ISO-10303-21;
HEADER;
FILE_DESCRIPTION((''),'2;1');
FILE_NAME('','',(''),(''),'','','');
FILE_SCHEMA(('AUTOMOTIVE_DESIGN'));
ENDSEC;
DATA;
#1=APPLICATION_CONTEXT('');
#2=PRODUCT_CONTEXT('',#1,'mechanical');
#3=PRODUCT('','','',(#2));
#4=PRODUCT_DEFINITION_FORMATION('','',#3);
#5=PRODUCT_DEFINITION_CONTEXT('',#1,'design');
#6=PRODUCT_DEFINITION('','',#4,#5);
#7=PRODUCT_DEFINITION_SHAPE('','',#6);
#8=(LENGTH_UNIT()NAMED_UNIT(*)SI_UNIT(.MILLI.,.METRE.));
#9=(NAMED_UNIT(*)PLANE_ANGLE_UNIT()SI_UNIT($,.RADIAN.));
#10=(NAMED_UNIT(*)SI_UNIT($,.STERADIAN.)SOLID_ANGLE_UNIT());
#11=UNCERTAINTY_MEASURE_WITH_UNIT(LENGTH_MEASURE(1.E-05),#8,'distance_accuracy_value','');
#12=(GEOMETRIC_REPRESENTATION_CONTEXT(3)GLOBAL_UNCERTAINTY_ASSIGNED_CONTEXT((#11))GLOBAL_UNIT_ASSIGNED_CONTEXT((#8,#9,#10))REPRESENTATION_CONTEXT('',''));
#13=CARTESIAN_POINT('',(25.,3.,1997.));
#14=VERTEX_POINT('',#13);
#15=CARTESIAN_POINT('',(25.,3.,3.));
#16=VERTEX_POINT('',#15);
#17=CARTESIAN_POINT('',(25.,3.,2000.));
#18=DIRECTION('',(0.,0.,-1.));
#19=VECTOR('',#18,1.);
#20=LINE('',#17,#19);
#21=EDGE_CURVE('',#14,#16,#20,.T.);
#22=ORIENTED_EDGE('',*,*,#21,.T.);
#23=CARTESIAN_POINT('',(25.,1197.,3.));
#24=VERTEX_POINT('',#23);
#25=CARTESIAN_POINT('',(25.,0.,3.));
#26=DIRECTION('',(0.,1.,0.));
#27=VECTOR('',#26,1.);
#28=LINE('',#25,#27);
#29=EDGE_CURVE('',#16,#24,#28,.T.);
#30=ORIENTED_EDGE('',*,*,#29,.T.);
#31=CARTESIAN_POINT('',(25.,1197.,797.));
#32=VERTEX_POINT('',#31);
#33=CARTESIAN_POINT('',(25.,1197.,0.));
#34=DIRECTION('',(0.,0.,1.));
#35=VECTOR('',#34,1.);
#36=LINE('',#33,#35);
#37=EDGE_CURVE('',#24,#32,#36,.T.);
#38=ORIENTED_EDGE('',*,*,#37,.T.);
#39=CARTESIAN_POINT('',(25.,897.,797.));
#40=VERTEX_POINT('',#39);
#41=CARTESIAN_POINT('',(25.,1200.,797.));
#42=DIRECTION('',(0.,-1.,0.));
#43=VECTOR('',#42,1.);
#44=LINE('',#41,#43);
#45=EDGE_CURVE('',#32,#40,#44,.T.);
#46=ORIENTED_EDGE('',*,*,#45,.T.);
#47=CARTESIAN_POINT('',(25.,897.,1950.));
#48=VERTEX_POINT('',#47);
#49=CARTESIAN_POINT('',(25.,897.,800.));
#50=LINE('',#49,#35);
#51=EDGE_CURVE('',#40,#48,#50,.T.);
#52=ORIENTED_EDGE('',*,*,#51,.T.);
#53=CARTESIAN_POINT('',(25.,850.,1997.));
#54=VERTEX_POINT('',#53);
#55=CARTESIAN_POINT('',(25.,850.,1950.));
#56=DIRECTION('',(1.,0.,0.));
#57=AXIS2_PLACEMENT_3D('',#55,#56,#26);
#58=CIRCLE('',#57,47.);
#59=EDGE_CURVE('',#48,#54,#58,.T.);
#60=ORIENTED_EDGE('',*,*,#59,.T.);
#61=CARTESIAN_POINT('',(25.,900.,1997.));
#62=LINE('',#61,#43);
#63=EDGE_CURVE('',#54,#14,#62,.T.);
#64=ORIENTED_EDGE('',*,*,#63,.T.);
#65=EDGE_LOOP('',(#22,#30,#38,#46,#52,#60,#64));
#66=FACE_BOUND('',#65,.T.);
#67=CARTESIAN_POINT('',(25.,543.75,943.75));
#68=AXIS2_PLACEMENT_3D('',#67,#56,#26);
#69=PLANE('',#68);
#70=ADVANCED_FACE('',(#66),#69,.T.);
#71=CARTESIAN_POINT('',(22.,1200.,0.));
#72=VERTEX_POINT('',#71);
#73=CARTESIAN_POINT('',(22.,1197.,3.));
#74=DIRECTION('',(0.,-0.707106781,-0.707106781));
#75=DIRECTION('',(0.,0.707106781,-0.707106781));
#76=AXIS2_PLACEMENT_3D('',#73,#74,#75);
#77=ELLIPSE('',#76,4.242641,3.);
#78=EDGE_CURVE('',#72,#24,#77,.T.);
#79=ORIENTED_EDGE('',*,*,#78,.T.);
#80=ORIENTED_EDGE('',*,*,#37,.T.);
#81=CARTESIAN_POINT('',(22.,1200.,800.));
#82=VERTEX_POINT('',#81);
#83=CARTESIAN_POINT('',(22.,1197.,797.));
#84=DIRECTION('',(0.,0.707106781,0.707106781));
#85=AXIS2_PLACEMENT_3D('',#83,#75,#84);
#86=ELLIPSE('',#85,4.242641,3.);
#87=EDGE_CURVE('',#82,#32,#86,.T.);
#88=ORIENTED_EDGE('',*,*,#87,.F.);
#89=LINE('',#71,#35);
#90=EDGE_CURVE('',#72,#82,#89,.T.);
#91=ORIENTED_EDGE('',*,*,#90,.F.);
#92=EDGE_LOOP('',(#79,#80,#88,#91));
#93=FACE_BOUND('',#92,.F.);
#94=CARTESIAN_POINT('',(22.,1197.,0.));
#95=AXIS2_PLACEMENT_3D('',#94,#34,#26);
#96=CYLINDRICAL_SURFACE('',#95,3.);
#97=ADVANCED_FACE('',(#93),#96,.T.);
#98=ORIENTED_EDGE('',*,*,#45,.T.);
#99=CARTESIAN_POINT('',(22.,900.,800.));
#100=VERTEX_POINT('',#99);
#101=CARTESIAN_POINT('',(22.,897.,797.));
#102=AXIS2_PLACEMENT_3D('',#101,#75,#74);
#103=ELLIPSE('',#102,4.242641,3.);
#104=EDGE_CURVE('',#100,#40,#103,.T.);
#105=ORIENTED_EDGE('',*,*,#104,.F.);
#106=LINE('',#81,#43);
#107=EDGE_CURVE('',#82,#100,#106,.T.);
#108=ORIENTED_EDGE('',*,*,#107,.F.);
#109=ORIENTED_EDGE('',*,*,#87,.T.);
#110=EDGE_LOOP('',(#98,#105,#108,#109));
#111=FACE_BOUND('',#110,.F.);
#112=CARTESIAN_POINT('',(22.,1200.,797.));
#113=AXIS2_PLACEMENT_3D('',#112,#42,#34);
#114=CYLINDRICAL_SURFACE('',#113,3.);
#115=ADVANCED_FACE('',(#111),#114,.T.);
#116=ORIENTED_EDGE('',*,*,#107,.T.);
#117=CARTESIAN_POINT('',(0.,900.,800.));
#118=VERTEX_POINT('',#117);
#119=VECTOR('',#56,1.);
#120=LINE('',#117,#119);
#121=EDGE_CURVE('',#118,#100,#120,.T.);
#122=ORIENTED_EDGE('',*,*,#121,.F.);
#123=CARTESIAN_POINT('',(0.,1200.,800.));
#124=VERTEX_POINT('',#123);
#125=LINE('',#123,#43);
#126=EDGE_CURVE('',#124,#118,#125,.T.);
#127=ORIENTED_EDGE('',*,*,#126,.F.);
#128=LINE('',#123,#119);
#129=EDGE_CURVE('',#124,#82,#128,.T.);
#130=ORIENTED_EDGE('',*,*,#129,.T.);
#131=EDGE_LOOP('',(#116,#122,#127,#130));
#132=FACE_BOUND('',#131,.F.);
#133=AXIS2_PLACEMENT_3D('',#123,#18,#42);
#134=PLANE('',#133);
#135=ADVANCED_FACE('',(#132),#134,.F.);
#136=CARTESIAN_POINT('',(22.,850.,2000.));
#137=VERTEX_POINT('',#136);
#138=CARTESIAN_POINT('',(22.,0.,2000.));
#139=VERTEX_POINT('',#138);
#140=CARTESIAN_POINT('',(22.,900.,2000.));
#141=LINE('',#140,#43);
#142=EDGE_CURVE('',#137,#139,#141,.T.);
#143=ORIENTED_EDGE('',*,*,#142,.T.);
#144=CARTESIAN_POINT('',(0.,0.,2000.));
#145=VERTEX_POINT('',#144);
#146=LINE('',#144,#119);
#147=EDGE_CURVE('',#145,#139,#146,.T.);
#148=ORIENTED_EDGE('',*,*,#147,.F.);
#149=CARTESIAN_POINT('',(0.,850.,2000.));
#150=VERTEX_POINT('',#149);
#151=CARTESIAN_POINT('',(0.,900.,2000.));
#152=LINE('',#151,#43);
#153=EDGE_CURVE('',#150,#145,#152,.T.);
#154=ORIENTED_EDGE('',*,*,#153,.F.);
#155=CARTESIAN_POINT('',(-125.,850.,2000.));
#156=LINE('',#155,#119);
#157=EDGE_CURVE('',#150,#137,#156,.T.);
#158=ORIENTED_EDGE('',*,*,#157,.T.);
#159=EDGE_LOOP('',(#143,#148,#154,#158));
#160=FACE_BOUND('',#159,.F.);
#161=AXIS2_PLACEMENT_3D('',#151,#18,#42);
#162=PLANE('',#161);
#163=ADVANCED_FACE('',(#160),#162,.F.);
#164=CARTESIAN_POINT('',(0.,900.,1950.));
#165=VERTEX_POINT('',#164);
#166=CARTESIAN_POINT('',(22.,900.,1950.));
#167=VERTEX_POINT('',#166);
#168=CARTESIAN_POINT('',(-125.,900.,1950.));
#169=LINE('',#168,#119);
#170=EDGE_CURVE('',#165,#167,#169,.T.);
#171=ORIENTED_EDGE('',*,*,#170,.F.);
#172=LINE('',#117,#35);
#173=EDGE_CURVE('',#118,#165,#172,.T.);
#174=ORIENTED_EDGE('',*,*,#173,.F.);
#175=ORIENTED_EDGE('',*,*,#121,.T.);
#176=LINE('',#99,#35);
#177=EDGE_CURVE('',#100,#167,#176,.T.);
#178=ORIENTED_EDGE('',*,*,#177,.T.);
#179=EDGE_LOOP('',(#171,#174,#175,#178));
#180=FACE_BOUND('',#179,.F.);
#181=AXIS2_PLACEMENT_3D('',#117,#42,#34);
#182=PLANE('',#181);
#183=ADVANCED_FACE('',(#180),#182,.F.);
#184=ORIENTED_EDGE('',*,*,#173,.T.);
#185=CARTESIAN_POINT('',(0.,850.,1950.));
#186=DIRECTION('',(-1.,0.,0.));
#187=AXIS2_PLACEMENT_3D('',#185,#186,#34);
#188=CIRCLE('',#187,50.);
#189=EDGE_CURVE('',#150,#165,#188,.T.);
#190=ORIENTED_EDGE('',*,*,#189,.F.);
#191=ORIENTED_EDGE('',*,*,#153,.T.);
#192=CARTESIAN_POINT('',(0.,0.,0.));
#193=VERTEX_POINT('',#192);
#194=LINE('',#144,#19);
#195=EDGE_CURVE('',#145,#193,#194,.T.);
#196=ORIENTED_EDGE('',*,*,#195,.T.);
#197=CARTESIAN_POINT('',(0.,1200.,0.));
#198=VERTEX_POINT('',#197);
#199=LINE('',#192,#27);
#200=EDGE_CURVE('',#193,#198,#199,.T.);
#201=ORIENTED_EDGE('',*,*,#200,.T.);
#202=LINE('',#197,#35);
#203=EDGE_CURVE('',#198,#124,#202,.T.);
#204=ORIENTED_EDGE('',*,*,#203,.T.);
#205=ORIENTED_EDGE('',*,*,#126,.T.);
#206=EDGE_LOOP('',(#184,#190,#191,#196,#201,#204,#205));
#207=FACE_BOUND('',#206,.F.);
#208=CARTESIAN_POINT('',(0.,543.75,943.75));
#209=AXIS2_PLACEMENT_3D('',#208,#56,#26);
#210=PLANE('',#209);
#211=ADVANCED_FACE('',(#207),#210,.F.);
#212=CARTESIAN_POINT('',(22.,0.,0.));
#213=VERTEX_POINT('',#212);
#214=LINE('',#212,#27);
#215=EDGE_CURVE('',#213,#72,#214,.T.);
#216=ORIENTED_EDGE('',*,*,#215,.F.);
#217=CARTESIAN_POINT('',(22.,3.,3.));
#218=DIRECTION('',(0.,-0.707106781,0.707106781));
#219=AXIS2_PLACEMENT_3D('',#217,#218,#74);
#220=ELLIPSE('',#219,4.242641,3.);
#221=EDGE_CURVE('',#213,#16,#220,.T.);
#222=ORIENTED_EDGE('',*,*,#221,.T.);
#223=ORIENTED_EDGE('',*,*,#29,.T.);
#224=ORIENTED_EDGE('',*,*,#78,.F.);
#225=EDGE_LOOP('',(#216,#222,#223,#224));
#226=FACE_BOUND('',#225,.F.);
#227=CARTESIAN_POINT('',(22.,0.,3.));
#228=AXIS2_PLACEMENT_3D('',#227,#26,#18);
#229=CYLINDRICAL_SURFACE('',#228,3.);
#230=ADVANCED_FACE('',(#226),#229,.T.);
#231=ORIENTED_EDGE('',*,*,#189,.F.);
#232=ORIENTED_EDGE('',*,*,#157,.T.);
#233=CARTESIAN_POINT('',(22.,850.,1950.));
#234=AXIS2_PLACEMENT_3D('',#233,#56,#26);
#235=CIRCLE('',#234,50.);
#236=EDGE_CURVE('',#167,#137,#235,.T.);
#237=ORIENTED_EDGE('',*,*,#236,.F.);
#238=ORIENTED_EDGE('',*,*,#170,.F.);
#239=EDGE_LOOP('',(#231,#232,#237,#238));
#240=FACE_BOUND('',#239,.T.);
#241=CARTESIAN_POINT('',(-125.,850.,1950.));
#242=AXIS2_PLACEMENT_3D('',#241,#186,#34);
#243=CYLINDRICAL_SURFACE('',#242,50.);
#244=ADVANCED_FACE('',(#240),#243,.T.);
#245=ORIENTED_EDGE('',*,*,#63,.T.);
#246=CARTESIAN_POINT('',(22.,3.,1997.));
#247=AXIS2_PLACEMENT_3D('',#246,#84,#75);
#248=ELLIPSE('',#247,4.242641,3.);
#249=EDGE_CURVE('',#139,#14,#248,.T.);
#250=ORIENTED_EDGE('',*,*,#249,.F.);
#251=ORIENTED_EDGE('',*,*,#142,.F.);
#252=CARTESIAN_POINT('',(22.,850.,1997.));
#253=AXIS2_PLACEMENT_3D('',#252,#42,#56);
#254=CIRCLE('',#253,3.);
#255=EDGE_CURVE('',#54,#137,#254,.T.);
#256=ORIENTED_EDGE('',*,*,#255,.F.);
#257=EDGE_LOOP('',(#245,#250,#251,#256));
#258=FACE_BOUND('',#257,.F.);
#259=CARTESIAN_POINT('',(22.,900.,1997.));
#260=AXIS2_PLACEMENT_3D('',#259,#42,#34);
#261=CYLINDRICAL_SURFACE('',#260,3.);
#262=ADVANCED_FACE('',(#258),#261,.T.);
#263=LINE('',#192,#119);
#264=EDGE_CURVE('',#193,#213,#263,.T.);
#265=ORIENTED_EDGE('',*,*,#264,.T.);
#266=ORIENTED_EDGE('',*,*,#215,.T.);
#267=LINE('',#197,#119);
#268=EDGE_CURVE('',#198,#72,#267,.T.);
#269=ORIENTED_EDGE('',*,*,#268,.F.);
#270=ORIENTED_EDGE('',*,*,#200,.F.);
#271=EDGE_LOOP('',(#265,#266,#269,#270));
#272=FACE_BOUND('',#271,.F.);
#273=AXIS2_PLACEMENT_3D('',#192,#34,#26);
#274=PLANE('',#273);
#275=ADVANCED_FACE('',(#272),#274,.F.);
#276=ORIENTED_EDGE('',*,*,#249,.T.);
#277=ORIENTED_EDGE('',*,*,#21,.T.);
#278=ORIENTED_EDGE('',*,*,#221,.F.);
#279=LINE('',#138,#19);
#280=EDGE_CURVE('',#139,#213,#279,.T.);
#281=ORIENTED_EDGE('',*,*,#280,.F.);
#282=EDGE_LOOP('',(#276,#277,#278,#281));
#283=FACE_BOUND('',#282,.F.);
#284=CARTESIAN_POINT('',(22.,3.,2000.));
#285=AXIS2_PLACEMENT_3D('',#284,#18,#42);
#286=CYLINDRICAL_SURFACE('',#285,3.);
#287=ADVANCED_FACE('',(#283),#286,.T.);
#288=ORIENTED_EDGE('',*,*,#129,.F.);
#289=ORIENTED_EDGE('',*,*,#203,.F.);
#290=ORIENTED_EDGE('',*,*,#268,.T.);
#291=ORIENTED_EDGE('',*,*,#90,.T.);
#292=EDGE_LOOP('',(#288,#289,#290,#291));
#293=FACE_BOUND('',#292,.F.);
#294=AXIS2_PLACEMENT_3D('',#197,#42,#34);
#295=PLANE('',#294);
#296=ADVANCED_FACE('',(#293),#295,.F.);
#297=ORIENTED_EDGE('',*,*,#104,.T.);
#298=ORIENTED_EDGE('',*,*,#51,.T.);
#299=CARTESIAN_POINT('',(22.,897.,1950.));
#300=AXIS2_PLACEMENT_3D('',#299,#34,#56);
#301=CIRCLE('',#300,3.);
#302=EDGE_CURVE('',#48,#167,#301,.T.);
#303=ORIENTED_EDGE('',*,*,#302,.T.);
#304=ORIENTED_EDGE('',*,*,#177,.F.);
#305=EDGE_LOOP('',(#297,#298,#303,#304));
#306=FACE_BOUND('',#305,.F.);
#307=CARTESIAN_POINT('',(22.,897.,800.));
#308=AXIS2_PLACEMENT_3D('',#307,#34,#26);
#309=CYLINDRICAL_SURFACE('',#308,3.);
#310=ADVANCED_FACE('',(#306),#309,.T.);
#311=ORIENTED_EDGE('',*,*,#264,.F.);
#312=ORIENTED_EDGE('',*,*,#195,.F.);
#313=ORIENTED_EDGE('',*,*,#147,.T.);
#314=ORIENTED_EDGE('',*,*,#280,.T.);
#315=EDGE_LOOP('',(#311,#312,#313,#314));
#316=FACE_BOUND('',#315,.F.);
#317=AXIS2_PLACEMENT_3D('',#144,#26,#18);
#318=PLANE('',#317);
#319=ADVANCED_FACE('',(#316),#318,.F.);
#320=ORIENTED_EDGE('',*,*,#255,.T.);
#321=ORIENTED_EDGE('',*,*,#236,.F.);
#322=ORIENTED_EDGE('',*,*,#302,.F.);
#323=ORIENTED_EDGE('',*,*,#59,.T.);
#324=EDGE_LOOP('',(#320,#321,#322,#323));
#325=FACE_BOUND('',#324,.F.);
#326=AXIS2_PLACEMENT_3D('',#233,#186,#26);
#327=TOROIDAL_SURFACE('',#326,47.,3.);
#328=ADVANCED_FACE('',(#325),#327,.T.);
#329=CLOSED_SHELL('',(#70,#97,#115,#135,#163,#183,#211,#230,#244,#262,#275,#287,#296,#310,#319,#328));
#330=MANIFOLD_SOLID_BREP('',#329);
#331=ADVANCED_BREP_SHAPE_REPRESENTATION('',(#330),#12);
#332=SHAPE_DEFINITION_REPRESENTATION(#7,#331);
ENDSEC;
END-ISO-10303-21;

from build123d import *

# Parameters (mm, degrees)
F1_DEPTH    = 25
F2_R        = 3
F3_T1_DEPTH = 150
F3_T4_ANGLE = 90


# Not quite as in the source:
# - a fillet or chamfer that OpenCascade refuses, or shapes differently, is made with other operations: its cross-section is extruded or revolved along the edge and cut away or added


with BuildPart() as f1:
    # F0 (on Right) → F1 (new body)
    with BuildSketch(Plane.YZ):
        Polygon((0, 2000), (0, 0), (1200, 0), (1200, 800), (900, 800), (900, 2000), align=None)
    extrude(amount=F1_DEPTH)

    # F2
    f2_edges = [f1.edges().sort_by_distance(p)[0] for p in [
        (25, 0, 1000),
        (25, 600, 0),
        (25, 1200, 400),
        (25, 1050, 800),
        (25, 900, 1400),
        (25, 450, 2000),
    ]]
    fillet(f2_edges, radius=F2_R)

    # F3: fillet of radius 50 on 1 edges, made by hand

    # F3_s2 → F3_t1 (cut)
    with BuildSketch(Plane.YZ.offset(-125)):
        with BuildLine():
            ThreePointArc((850, 2000), (885.3553390593, 1985.3553390593), (900, 1950))
            Line((900, 1950), (900, 2000))
            Line((900, 2000), (850, 2000))
        make_face()
    extrude(amount=F3_T1_DEPTH, mode=Mode.SUBTRACT)

    # F3_s3 → F3_t4 (revolve, cut)
    with BuildSketch(Plane.XY.offset(1950)):
        with BuildLine():
            ThreePointArc((25, 897), (24.1213203436, 899.1213203436), (22, 900))
            Line((22, 900), (25, 900))
            Line((25, 900), (25, 897))
        make_face()
    revolve(axis=Axis((25, 850, 1950), (1, 0, 0)), revolution_arc=F3_T4_ANGLE, mode=Mode.SUBTRACT)


solid = f1.part
